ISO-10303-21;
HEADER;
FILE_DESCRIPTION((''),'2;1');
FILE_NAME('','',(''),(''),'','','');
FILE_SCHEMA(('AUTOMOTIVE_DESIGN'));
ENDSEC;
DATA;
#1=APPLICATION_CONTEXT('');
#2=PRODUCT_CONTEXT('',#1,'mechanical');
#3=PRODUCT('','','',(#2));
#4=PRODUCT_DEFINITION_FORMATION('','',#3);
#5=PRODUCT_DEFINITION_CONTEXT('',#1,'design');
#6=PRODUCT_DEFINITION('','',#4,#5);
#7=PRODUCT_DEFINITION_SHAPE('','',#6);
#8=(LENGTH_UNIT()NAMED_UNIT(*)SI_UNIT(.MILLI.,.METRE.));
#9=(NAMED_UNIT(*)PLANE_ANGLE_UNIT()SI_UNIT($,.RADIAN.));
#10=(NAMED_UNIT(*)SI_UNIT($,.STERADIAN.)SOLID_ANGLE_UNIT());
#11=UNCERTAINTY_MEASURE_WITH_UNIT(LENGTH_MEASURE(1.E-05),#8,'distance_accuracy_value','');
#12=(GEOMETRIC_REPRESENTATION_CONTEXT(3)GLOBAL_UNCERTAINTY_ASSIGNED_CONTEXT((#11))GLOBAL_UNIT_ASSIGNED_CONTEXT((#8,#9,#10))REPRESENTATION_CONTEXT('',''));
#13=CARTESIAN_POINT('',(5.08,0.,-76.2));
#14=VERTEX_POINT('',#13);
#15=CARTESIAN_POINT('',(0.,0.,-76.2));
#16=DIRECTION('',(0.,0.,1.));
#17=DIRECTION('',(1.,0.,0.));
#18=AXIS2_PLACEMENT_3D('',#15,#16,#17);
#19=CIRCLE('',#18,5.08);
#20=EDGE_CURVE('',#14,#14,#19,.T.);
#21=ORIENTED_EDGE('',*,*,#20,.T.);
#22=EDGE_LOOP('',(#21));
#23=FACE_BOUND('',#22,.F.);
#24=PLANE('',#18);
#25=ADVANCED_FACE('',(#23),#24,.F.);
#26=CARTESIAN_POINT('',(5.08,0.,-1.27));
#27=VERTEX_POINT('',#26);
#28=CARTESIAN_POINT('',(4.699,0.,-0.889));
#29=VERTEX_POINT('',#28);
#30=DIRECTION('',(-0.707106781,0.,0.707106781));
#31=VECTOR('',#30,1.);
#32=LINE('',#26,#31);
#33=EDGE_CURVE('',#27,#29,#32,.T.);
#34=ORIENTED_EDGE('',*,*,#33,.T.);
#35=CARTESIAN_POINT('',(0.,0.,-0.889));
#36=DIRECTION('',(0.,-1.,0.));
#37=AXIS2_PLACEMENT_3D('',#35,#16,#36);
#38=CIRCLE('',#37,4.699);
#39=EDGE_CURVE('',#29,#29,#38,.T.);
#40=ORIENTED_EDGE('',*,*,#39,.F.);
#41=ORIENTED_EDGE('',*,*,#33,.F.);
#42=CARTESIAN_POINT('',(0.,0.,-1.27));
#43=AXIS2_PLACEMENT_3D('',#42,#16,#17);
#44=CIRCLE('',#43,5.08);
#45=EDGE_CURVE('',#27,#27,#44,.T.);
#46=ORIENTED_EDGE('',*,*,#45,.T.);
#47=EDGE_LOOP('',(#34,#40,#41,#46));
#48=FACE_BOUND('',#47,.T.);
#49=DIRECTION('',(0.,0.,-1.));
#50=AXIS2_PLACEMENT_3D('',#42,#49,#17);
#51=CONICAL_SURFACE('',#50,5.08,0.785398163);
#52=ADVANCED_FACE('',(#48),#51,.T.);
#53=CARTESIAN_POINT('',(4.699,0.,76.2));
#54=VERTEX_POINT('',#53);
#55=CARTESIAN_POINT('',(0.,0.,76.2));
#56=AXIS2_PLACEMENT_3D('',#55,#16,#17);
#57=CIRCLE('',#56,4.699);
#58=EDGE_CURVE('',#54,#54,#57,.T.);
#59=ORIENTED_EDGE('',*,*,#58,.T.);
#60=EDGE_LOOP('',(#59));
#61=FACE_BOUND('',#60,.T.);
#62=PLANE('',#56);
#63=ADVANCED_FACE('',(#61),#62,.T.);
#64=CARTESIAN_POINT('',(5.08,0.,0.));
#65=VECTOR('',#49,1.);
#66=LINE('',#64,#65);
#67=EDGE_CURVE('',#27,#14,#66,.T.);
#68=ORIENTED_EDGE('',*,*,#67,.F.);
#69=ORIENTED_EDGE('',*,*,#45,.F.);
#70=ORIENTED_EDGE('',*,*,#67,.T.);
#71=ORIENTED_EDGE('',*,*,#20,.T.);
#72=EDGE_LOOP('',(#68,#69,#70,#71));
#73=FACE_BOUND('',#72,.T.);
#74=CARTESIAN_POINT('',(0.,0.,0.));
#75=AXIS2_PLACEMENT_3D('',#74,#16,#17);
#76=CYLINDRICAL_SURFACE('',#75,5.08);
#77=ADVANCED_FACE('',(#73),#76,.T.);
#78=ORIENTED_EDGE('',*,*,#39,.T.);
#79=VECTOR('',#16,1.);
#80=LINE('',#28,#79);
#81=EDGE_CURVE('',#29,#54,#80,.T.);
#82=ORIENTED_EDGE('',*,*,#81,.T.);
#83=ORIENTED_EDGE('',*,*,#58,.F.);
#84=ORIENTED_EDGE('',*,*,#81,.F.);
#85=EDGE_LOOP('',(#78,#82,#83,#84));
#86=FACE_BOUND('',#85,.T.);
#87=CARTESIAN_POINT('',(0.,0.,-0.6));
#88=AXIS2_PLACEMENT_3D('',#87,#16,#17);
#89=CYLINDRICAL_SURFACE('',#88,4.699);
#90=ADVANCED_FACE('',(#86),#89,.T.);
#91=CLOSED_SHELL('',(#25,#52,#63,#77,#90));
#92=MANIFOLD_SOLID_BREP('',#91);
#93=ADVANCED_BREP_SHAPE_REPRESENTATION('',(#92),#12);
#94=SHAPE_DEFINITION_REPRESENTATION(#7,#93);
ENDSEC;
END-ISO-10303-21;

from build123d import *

# Parameters (mm, degrees)
F0_R        = 5.08
F1_DEPTH    = 76.2
F2_R        = 4.699
F3_DEPTH    = 76.2
F4_S5_R     = 4.699
F4_T6_DEPTH = 9


# Not quite as in the source:
# - a fillet or chamfer that OpenCascade refuses, or shapes differently, is made with other operations: its cross-section is extruded or revolved along the edge and cut away or added


with BuildPart() as f1:
    # F0 (on Top) → F1 (new body)
    with BuildSketch(Plane.XY):
        Circle(F0_R)
    extrude(amount=-F1_DEPTH)

    # F2 (on face) → F3 (join)
    with BuildSketch(Plane.XY):
        Circle(F2_R)
    extrude(amount=F3_DEPTH)

    # F4: chamfer of 1.27 on 1 edges, made by hand


with BuildPart() as f4_tool2:
    # F4_s3 → F4_t4 (revolve)
    with BuildSketch(Plane.XZ):
        Polygon((5.08, -1.27), (3.81, 0), (5.08, 0), align=None)
    revolve(axis=Axis((0, 0, 0), (0, 0, 1)))

    # F4_s5 → F4_t6 (cut, symmetric)
    with BuildSketch(Plane.XY.offset(-0.6)):
        Circle(F4_S5_R)
    extrude(amount=F4_T6_DEPTH, both=True, mode=Mode.SUBTRACT)


with BuildPart() as f1_1:
    add(f1.part)

    # F4_t1: cut F4_tool2
    add(f4_tool2.part, mode=Mode.SUBTRACT)


solid = f1_1.part
